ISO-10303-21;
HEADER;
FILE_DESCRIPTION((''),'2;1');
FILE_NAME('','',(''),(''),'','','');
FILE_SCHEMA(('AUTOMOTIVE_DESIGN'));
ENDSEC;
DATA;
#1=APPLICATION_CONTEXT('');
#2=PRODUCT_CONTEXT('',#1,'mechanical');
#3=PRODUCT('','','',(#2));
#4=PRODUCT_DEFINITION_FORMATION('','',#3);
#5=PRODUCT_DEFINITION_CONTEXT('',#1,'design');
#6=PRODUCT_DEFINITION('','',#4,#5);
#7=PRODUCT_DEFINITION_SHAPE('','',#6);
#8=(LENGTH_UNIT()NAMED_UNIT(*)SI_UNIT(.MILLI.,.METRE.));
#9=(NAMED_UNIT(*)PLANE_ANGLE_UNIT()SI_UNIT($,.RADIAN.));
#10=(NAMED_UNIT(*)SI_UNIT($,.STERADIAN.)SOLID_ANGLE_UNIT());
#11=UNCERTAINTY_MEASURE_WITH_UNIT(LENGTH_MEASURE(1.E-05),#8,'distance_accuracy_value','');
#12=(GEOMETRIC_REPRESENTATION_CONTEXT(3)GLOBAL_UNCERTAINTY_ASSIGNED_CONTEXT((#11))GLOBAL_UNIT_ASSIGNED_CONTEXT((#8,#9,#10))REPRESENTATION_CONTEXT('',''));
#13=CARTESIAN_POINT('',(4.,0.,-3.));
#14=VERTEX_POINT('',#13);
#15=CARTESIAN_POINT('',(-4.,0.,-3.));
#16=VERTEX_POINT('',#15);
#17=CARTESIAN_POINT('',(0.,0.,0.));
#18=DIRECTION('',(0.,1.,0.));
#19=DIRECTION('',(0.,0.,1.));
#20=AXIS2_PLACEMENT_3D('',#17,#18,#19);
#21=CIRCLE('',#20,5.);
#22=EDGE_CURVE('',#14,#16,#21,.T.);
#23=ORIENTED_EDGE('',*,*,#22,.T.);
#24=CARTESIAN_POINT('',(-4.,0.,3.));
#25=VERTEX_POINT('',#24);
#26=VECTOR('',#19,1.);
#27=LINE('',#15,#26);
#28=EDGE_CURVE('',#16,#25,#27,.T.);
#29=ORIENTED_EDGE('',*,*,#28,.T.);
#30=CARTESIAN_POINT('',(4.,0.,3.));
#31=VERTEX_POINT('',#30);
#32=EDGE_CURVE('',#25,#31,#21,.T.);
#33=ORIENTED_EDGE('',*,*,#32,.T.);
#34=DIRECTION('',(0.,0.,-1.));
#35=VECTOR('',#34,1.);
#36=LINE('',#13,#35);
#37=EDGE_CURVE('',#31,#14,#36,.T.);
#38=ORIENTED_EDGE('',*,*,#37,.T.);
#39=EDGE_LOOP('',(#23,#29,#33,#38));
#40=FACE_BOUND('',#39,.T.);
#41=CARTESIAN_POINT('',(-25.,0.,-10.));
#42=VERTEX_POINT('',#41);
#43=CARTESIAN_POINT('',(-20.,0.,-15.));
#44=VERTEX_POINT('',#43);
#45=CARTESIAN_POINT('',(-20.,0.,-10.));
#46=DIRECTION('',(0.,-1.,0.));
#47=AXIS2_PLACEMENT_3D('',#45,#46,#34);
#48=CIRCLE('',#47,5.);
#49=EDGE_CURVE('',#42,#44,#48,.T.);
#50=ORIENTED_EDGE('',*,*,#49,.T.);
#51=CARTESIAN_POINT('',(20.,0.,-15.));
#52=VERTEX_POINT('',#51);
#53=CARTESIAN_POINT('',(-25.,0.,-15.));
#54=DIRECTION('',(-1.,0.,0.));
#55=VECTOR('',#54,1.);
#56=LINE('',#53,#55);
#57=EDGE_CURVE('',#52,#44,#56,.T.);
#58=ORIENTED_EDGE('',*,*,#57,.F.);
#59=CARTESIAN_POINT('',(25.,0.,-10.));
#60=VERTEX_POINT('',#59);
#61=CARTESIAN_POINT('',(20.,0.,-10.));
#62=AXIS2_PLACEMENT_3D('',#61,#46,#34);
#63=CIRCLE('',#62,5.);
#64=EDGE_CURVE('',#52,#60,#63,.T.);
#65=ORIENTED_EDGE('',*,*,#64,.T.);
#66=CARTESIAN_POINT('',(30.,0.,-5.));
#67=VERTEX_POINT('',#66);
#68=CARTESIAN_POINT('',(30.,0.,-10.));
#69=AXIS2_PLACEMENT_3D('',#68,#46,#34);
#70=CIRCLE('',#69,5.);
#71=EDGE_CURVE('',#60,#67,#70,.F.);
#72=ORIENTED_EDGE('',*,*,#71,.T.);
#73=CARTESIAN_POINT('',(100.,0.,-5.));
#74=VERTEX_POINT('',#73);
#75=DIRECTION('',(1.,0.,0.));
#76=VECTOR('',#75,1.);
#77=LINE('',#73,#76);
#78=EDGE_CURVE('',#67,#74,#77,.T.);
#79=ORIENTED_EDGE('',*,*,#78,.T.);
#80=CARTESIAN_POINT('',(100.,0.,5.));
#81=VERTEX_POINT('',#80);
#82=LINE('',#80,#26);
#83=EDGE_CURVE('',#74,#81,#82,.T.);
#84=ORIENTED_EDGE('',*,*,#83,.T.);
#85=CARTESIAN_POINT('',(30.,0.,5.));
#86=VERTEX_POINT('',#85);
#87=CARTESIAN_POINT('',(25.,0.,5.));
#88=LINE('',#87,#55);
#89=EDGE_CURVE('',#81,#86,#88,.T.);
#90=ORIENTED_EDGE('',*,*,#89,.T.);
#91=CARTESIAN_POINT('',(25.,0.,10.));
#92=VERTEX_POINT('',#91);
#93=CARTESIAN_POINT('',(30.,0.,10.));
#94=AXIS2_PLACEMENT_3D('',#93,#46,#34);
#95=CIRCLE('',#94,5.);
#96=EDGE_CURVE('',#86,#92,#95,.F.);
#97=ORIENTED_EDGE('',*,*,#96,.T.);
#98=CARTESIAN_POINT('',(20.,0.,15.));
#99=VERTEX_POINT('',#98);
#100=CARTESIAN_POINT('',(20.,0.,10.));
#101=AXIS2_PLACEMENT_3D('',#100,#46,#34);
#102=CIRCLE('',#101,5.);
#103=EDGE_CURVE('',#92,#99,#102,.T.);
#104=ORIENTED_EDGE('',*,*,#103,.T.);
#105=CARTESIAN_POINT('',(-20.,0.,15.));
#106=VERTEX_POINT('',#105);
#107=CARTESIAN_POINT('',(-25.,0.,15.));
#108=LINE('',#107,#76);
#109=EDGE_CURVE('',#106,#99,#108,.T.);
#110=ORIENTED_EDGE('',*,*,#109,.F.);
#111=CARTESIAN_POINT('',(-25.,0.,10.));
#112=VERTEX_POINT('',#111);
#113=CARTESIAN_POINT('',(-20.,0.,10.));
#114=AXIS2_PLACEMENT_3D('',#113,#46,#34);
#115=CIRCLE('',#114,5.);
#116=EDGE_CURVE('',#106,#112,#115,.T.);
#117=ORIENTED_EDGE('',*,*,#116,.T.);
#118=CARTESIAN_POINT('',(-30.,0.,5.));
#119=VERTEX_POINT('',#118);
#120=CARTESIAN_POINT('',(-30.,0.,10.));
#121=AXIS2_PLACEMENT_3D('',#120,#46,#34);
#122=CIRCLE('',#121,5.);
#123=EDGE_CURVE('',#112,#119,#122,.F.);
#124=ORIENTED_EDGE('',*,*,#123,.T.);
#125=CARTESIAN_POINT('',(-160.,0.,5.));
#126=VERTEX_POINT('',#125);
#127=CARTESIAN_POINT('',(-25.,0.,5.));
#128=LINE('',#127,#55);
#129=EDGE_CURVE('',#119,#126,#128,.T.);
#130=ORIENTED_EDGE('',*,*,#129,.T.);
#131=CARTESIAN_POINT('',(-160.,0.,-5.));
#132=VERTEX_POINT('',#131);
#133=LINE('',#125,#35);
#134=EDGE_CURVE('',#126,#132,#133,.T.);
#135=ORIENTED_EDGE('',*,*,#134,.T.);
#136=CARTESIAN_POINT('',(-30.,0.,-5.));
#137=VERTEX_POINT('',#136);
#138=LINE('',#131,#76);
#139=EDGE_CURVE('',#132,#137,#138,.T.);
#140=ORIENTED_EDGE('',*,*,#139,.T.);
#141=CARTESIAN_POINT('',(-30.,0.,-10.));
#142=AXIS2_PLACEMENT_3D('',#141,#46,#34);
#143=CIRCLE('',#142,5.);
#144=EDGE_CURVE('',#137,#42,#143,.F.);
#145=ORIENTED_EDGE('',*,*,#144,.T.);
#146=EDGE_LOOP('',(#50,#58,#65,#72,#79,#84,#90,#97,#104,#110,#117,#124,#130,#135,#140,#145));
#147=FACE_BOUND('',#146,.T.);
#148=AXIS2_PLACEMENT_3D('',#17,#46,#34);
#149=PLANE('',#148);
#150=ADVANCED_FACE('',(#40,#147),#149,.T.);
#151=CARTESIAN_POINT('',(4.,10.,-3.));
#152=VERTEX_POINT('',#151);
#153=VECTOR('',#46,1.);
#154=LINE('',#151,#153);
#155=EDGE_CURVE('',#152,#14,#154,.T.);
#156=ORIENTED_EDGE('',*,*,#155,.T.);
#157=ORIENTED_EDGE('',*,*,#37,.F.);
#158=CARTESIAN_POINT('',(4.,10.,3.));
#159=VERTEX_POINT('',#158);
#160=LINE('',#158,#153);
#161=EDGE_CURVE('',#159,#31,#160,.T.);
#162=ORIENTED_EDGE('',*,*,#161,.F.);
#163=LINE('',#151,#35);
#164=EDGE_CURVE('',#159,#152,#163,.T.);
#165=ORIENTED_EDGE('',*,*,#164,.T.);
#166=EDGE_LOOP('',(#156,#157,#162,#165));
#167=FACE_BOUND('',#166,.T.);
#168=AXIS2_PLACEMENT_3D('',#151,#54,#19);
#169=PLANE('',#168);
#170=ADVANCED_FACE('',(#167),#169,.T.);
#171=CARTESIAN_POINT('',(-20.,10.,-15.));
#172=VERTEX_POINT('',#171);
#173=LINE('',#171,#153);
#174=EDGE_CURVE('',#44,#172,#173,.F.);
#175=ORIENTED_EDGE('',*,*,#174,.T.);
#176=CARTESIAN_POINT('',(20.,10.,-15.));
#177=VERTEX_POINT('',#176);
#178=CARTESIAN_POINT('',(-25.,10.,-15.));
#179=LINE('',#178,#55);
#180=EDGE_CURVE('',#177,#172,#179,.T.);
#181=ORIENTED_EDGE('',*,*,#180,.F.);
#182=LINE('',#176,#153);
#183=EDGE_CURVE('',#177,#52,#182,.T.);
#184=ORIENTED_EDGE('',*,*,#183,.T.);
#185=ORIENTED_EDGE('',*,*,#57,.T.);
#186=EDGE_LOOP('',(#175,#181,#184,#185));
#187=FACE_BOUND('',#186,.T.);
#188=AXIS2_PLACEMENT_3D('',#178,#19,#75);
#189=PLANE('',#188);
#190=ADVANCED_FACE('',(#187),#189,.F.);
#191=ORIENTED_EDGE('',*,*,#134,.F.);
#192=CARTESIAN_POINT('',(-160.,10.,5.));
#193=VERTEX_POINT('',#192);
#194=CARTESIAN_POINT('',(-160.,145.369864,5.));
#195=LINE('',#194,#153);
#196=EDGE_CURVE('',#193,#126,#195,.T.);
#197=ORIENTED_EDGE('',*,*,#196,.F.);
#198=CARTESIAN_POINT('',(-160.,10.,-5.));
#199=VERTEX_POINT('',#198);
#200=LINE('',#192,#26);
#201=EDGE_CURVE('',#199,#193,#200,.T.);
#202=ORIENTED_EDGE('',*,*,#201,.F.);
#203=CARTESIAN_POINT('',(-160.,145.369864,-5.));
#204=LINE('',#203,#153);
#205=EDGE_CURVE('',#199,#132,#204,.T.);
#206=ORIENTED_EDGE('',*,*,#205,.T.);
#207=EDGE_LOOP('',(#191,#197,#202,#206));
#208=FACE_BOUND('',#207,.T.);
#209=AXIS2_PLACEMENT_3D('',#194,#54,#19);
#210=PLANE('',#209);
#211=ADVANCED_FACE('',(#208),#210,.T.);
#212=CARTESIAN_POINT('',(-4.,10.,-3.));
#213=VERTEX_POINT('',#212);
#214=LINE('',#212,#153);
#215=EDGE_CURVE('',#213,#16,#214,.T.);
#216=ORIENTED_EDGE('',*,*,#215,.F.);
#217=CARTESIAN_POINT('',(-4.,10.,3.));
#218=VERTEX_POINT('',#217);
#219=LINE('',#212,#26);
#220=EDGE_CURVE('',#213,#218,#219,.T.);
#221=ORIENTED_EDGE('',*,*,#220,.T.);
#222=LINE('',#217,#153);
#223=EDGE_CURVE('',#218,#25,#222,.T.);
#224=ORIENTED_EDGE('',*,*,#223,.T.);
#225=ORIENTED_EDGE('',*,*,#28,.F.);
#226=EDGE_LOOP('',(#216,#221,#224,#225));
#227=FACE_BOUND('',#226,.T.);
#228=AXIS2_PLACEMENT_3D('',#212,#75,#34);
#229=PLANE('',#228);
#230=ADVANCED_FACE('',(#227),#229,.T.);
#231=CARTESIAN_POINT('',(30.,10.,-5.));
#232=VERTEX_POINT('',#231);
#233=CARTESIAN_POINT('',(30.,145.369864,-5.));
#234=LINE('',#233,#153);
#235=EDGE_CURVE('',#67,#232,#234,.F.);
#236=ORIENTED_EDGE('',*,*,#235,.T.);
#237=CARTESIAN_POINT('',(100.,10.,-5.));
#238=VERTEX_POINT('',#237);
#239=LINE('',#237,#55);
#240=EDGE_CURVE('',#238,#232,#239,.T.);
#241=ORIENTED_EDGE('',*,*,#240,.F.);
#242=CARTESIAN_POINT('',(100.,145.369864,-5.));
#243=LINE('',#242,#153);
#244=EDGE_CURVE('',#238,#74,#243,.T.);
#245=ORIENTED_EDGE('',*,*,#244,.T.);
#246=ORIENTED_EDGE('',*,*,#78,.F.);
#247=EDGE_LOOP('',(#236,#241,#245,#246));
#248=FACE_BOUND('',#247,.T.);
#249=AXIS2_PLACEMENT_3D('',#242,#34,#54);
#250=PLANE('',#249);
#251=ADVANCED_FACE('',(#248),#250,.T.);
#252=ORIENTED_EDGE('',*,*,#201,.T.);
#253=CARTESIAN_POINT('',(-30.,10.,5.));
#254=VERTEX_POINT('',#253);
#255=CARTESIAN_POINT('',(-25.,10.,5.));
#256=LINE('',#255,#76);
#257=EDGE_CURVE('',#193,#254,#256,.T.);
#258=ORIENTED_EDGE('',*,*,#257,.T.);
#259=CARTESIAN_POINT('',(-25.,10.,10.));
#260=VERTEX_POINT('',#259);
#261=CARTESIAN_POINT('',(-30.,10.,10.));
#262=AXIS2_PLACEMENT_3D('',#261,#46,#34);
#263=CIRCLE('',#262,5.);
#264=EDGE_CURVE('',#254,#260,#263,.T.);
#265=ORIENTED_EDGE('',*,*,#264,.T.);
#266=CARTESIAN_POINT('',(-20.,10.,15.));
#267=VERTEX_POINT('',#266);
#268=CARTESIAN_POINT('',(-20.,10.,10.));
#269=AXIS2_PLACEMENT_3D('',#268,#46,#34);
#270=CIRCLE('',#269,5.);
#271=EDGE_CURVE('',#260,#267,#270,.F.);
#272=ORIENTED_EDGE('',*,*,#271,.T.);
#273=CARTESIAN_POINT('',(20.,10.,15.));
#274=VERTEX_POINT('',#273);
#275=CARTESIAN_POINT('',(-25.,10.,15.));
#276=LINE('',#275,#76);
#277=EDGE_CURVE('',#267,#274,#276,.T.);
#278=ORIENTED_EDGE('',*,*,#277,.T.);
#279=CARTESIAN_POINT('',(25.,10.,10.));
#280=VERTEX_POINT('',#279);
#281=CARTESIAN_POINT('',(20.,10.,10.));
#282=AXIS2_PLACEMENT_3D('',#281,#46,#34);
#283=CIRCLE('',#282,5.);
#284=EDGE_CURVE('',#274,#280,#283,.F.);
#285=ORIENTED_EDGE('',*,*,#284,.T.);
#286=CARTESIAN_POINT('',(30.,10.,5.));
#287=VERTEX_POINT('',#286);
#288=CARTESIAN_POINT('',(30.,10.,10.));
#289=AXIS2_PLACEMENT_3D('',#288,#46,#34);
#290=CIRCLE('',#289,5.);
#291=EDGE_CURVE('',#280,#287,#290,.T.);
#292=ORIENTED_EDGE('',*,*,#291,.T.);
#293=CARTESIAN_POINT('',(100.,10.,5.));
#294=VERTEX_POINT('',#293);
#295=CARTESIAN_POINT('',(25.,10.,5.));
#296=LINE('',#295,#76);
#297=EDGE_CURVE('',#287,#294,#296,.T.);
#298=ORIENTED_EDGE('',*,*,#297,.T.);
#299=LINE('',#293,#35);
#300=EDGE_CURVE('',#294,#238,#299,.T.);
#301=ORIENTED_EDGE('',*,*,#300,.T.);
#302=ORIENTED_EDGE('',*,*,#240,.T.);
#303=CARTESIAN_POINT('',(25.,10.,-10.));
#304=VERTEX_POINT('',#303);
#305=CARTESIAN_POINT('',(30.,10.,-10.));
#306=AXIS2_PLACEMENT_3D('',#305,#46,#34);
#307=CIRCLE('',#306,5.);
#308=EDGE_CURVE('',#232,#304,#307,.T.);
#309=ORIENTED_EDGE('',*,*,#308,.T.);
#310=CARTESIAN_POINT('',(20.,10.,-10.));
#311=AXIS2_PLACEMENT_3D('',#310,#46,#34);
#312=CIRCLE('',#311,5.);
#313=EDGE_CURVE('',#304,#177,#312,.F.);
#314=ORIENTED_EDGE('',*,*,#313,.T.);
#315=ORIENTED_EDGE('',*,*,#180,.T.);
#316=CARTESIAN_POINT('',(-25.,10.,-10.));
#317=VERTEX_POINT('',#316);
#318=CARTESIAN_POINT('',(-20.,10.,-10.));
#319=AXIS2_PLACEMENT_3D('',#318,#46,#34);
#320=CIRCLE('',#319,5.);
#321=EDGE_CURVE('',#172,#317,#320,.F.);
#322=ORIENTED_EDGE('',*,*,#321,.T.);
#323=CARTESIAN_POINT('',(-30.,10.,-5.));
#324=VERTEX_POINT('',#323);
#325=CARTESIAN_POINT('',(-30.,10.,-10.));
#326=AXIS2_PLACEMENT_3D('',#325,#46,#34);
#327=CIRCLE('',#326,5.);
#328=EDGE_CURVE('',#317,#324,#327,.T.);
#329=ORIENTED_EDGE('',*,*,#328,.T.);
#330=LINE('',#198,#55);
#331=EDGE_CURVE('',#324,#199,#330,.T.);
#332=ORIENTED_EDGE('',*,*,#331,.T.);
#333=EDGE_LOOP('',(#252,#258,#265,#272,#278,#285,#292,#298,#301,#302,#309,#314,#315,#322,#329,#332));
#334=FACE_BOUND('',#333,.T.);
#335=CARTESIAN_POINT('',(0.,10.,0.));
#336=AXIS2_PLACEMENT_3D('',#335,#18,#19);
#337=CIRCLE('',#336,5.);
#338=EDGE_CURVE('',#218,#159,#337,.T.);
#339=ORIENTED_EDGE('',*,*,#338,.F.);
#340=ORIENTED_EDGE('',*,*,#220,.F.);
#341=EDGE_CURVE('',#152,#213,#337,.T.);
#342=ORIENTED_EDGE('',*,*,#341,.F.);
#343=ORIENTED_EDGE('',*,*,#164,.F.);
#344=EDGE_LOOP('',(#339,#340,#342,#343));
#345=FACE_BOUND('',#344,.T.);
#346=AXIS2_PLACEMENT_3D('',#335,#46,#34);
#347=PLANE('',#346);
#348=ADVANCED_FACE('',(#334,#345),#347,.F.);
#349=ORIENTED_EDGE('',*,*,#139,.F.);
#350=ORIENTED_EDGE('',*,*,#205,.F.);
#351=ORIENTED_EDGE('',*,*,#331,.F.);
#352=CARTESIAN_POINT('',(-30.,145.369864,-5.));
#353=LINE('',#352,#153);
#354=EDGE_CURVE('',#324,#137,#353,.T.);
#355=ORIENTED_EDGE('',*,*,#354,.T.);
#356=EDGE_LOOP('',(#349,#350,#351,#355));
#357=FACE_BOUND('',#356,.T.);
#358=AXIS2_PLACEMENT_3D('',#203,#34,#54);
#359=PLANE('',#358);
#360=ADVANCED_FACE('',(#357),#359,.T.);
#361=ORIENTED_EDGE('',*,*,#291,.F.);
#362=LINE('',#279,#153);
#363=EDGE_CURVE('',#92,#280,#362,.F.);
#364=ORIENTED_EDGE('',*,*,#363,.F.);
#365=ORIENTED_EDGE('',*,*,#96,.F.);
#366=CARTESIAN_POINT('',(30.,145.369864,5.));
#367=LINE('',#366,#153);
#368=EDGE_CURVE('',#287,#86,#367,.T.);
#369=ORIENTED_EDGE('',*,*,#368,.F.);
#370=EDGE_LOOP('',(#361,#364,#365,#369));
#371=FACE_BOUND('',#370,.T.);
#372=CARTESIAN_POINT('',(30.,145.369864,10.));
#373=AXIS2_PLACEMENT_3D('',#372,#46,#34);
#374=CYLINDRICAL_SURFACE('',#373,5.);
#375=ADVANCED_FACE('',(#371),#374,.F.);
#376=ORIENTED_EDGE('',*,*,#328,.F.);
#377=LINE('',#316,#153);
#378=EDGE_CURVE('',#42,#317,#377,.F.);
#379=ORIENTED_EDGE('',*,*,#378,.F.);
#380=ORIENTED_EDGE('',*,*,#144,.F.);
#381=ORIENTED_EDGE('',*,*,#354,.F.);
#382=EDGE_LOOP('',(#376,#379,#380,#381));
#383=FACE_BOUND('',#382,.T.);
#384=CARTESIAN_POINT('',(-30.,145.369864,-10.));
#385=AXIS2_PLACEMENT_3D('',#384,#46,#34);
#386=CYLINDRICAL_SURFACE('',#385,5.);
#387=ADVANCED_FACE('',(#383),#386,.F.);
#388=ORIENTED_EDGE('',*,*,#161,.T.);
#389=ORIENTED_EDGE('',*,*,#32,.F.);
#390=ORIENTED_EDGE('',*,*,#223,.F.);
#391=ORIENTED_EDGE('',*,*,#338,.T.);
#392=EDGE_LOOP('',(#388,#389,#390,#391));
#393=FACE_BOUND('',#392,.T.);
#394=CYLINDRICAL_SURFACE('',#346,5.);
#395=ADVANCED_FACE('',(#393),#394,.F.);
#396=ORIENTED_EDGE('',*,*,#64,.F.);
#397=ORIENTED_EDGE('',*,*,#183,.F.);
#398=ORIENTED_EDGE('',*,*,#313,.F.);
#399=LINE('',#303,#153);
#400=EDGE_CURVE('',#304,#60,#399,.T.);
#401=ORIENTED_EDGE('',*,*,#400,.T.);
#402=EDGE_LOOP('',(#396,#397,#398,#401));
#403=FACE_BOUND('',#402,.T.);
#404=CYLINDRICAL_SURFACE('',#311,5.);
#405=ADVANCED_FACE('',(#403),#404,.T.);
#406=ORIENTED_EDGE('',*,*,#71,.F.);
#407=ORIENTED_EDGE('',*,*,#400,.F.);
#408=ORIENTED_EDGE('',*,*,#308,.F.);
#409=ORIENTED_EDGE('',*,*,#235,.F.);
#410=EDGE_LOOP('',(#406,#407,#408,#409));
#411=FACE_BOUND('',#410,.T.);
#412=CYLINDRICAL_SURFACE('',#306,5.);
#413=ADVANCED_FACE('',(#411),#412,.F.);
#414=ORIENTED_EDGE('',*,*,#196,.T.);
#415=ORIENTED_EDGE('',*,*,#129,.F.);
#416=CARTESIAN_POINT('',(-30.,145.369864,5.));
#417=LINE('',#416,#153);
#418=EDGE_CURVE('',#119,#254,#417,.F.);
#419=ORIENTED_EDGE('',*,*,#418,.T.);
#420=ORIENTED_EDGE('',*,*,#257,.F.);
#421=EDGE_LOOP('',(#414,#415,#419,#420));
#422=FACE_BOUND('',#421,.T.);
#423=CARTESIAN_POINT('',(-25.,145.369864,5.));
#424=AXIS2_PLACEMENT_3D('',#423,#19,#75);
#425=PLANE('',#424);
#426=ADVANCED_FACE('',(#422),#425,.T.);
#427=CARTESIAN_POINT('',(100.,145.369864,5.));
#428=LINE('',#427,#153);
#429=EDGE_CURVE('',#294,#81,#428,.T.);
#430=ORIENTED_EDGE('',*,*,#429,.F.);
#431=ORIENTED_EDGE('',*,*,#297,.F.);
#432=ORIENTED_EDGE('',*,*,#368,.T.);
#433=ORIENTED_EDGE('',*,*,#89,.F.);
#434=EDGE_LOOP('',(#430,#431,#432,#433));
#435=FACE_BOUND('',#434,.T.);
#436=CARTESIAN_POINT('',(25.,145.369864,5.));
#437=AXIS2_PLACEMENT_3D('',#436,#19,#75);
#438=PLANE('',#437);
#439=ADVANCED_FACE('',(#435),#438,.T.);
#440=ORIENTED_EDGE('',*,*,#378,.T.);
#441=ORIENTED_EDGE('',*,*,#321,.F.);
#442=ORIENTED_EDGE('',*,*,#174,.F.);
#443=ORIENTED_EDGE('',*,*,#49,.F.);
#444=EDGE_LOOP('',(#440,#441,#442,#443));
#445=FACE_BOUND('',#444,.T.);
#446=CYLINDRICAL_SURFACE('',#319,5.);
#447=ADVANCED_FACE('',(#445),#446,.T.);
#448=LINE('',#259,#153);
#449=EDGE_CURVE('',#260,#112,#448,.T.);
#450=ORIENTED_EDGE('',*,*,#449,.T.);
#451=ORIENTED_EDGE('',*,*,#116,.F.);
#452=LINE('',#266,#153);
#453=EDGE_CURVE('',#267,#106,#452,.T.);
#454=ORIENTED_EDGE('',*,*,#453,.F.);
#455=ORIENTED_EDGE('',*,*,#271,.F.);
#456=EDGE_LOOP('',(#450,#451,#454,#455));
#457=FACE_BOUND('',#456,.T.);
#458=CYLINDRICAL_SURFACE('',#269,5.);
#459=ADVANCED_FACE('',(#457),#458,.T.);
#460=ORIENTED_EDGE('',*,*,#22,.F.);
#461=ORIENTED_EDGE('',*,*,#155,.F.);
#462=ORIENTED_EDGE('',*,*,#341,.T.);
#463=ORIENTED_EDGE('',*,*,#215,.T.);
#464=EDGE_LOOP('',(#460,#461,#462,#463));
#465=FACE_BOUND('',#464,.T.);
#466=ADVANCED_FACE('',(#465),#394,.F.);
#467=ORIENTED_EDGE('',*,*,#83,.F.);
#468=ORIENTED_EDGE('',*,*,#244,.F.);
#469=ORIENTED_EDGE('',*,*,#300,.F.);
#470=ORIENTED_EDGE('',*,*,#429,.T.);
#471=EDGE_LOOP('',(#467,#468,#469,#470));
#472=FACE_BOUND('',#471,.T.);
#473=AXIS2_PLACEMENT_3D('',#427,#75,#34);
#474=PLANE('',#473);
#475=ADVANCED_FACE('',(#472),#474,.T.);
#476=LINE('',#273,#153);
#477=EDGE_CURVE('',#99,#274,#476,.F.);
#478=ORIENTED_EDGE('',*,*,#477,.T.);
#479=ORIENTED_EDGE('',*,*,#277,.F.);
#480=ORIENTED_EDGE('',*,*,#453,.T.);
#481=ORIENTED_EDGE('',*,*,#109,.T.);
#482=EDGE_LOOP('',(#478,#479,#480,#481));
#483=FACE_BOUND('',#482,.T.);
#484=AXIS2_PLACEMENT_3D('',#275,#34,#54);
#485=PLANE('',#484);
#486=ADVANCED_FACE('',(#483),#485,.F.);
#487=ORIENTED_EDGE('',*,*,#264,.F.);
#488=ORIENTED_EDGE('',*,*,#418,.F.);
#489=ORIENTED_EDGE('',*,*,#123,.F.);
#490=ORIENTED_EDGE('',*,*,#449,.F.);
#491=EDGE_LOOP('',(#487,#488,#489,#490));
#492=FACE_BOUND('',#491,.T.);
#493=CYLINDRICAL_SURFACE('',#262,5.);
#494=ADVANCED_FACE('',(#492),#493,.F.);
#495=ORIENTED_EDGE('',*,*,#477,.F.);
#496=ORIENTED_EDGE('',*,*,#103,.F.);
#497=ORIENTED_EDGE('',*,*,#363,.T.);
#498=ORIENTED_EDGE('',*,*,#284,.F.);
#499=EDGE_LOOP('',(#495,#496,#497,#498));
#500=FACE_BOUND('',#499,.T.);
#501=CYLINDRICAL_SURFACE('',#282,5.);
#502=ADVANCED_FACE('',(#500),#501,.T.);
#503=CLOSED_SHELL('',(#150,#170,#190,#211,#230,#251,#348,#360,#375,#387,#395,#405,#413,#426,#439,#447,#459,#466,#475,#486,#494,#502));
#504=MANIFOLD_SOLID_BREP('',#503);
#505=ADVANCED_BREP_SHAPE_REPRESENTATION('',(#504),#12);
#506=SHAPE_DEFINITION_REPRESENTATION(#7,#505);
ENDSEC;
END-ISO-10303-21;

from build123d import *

# Parameters (mm, degrees)
SKETCH1_W           = 50
SKETCH1_H           = 30
BOSS_EXTRUDE1_DEPTH = 10
SKETCH2_W           = 135
SKETCH2_H           = 10
SKETCH2_W_2         = 75
BOSS_EXTRUDE3_DEPTH = 10
FILLET1_R           = 5
FILLET2_R           = 5


with BuildPart() as part:
    # Sketch1 → Boss-Extrude1 (new body)
    with BuildSketch(Plane(origin=(0, 0, 0), x_dir=(1, 0, 0), z_dir=(0, 1, 0))):
        Rectangle(SKETCH1_W, SKETCH1_H)
        with BuildLine():
            Line((-4, 3), (-4, -3))
            ThreePointArc((-4, -3), (0, -5), (4, -3))
            Line((4, -3), (4, 3))
            ThreePointArc((4, 3), (0, 5), (-4, 3))
        make_face(mode=Mode.SUBTRACT)
    extrude(amount=BOSS_EXTRUDE1_DEPTH)

    # Sketch2 → Boss-Extrude3 (add)
    with BuildSketch(Plane.XZ):
        with Locations((-92.5, 0)):
            Rectangle(SKETCH2_W, SKETCH2_H)
        with Locations((62.5, 0)):
            Rectangle(SKETCH2_W_2, SKETCH2_H)
    extrude(amount=-BOSS_EXTRUDE3_DEPTH)

    # Fillet1
    fillet1_edges = [part.edges().sort_by_distance(p)[0] for p in [
        (-25, 5, 5),
        (-25, 5, -5),
        (25, 5, -5),
        (25, 5, 5),
    ]]
    fillet(fillet1_edges, radius=FILLET1_R)

    # Fillet2
    fillet2_edges = [part.edges().sort_by_distance(p)[0] for p in [
        (25, 5, 15),
        (-25, 5, 15),
        (-25, 5, -15),
        (25, 5, -15),
    ]]
    fillet(fillet2_edges, radius=FILLET2_R - 0.0001)  # a hair under: the kernel refuses the full size


solid = part.part
